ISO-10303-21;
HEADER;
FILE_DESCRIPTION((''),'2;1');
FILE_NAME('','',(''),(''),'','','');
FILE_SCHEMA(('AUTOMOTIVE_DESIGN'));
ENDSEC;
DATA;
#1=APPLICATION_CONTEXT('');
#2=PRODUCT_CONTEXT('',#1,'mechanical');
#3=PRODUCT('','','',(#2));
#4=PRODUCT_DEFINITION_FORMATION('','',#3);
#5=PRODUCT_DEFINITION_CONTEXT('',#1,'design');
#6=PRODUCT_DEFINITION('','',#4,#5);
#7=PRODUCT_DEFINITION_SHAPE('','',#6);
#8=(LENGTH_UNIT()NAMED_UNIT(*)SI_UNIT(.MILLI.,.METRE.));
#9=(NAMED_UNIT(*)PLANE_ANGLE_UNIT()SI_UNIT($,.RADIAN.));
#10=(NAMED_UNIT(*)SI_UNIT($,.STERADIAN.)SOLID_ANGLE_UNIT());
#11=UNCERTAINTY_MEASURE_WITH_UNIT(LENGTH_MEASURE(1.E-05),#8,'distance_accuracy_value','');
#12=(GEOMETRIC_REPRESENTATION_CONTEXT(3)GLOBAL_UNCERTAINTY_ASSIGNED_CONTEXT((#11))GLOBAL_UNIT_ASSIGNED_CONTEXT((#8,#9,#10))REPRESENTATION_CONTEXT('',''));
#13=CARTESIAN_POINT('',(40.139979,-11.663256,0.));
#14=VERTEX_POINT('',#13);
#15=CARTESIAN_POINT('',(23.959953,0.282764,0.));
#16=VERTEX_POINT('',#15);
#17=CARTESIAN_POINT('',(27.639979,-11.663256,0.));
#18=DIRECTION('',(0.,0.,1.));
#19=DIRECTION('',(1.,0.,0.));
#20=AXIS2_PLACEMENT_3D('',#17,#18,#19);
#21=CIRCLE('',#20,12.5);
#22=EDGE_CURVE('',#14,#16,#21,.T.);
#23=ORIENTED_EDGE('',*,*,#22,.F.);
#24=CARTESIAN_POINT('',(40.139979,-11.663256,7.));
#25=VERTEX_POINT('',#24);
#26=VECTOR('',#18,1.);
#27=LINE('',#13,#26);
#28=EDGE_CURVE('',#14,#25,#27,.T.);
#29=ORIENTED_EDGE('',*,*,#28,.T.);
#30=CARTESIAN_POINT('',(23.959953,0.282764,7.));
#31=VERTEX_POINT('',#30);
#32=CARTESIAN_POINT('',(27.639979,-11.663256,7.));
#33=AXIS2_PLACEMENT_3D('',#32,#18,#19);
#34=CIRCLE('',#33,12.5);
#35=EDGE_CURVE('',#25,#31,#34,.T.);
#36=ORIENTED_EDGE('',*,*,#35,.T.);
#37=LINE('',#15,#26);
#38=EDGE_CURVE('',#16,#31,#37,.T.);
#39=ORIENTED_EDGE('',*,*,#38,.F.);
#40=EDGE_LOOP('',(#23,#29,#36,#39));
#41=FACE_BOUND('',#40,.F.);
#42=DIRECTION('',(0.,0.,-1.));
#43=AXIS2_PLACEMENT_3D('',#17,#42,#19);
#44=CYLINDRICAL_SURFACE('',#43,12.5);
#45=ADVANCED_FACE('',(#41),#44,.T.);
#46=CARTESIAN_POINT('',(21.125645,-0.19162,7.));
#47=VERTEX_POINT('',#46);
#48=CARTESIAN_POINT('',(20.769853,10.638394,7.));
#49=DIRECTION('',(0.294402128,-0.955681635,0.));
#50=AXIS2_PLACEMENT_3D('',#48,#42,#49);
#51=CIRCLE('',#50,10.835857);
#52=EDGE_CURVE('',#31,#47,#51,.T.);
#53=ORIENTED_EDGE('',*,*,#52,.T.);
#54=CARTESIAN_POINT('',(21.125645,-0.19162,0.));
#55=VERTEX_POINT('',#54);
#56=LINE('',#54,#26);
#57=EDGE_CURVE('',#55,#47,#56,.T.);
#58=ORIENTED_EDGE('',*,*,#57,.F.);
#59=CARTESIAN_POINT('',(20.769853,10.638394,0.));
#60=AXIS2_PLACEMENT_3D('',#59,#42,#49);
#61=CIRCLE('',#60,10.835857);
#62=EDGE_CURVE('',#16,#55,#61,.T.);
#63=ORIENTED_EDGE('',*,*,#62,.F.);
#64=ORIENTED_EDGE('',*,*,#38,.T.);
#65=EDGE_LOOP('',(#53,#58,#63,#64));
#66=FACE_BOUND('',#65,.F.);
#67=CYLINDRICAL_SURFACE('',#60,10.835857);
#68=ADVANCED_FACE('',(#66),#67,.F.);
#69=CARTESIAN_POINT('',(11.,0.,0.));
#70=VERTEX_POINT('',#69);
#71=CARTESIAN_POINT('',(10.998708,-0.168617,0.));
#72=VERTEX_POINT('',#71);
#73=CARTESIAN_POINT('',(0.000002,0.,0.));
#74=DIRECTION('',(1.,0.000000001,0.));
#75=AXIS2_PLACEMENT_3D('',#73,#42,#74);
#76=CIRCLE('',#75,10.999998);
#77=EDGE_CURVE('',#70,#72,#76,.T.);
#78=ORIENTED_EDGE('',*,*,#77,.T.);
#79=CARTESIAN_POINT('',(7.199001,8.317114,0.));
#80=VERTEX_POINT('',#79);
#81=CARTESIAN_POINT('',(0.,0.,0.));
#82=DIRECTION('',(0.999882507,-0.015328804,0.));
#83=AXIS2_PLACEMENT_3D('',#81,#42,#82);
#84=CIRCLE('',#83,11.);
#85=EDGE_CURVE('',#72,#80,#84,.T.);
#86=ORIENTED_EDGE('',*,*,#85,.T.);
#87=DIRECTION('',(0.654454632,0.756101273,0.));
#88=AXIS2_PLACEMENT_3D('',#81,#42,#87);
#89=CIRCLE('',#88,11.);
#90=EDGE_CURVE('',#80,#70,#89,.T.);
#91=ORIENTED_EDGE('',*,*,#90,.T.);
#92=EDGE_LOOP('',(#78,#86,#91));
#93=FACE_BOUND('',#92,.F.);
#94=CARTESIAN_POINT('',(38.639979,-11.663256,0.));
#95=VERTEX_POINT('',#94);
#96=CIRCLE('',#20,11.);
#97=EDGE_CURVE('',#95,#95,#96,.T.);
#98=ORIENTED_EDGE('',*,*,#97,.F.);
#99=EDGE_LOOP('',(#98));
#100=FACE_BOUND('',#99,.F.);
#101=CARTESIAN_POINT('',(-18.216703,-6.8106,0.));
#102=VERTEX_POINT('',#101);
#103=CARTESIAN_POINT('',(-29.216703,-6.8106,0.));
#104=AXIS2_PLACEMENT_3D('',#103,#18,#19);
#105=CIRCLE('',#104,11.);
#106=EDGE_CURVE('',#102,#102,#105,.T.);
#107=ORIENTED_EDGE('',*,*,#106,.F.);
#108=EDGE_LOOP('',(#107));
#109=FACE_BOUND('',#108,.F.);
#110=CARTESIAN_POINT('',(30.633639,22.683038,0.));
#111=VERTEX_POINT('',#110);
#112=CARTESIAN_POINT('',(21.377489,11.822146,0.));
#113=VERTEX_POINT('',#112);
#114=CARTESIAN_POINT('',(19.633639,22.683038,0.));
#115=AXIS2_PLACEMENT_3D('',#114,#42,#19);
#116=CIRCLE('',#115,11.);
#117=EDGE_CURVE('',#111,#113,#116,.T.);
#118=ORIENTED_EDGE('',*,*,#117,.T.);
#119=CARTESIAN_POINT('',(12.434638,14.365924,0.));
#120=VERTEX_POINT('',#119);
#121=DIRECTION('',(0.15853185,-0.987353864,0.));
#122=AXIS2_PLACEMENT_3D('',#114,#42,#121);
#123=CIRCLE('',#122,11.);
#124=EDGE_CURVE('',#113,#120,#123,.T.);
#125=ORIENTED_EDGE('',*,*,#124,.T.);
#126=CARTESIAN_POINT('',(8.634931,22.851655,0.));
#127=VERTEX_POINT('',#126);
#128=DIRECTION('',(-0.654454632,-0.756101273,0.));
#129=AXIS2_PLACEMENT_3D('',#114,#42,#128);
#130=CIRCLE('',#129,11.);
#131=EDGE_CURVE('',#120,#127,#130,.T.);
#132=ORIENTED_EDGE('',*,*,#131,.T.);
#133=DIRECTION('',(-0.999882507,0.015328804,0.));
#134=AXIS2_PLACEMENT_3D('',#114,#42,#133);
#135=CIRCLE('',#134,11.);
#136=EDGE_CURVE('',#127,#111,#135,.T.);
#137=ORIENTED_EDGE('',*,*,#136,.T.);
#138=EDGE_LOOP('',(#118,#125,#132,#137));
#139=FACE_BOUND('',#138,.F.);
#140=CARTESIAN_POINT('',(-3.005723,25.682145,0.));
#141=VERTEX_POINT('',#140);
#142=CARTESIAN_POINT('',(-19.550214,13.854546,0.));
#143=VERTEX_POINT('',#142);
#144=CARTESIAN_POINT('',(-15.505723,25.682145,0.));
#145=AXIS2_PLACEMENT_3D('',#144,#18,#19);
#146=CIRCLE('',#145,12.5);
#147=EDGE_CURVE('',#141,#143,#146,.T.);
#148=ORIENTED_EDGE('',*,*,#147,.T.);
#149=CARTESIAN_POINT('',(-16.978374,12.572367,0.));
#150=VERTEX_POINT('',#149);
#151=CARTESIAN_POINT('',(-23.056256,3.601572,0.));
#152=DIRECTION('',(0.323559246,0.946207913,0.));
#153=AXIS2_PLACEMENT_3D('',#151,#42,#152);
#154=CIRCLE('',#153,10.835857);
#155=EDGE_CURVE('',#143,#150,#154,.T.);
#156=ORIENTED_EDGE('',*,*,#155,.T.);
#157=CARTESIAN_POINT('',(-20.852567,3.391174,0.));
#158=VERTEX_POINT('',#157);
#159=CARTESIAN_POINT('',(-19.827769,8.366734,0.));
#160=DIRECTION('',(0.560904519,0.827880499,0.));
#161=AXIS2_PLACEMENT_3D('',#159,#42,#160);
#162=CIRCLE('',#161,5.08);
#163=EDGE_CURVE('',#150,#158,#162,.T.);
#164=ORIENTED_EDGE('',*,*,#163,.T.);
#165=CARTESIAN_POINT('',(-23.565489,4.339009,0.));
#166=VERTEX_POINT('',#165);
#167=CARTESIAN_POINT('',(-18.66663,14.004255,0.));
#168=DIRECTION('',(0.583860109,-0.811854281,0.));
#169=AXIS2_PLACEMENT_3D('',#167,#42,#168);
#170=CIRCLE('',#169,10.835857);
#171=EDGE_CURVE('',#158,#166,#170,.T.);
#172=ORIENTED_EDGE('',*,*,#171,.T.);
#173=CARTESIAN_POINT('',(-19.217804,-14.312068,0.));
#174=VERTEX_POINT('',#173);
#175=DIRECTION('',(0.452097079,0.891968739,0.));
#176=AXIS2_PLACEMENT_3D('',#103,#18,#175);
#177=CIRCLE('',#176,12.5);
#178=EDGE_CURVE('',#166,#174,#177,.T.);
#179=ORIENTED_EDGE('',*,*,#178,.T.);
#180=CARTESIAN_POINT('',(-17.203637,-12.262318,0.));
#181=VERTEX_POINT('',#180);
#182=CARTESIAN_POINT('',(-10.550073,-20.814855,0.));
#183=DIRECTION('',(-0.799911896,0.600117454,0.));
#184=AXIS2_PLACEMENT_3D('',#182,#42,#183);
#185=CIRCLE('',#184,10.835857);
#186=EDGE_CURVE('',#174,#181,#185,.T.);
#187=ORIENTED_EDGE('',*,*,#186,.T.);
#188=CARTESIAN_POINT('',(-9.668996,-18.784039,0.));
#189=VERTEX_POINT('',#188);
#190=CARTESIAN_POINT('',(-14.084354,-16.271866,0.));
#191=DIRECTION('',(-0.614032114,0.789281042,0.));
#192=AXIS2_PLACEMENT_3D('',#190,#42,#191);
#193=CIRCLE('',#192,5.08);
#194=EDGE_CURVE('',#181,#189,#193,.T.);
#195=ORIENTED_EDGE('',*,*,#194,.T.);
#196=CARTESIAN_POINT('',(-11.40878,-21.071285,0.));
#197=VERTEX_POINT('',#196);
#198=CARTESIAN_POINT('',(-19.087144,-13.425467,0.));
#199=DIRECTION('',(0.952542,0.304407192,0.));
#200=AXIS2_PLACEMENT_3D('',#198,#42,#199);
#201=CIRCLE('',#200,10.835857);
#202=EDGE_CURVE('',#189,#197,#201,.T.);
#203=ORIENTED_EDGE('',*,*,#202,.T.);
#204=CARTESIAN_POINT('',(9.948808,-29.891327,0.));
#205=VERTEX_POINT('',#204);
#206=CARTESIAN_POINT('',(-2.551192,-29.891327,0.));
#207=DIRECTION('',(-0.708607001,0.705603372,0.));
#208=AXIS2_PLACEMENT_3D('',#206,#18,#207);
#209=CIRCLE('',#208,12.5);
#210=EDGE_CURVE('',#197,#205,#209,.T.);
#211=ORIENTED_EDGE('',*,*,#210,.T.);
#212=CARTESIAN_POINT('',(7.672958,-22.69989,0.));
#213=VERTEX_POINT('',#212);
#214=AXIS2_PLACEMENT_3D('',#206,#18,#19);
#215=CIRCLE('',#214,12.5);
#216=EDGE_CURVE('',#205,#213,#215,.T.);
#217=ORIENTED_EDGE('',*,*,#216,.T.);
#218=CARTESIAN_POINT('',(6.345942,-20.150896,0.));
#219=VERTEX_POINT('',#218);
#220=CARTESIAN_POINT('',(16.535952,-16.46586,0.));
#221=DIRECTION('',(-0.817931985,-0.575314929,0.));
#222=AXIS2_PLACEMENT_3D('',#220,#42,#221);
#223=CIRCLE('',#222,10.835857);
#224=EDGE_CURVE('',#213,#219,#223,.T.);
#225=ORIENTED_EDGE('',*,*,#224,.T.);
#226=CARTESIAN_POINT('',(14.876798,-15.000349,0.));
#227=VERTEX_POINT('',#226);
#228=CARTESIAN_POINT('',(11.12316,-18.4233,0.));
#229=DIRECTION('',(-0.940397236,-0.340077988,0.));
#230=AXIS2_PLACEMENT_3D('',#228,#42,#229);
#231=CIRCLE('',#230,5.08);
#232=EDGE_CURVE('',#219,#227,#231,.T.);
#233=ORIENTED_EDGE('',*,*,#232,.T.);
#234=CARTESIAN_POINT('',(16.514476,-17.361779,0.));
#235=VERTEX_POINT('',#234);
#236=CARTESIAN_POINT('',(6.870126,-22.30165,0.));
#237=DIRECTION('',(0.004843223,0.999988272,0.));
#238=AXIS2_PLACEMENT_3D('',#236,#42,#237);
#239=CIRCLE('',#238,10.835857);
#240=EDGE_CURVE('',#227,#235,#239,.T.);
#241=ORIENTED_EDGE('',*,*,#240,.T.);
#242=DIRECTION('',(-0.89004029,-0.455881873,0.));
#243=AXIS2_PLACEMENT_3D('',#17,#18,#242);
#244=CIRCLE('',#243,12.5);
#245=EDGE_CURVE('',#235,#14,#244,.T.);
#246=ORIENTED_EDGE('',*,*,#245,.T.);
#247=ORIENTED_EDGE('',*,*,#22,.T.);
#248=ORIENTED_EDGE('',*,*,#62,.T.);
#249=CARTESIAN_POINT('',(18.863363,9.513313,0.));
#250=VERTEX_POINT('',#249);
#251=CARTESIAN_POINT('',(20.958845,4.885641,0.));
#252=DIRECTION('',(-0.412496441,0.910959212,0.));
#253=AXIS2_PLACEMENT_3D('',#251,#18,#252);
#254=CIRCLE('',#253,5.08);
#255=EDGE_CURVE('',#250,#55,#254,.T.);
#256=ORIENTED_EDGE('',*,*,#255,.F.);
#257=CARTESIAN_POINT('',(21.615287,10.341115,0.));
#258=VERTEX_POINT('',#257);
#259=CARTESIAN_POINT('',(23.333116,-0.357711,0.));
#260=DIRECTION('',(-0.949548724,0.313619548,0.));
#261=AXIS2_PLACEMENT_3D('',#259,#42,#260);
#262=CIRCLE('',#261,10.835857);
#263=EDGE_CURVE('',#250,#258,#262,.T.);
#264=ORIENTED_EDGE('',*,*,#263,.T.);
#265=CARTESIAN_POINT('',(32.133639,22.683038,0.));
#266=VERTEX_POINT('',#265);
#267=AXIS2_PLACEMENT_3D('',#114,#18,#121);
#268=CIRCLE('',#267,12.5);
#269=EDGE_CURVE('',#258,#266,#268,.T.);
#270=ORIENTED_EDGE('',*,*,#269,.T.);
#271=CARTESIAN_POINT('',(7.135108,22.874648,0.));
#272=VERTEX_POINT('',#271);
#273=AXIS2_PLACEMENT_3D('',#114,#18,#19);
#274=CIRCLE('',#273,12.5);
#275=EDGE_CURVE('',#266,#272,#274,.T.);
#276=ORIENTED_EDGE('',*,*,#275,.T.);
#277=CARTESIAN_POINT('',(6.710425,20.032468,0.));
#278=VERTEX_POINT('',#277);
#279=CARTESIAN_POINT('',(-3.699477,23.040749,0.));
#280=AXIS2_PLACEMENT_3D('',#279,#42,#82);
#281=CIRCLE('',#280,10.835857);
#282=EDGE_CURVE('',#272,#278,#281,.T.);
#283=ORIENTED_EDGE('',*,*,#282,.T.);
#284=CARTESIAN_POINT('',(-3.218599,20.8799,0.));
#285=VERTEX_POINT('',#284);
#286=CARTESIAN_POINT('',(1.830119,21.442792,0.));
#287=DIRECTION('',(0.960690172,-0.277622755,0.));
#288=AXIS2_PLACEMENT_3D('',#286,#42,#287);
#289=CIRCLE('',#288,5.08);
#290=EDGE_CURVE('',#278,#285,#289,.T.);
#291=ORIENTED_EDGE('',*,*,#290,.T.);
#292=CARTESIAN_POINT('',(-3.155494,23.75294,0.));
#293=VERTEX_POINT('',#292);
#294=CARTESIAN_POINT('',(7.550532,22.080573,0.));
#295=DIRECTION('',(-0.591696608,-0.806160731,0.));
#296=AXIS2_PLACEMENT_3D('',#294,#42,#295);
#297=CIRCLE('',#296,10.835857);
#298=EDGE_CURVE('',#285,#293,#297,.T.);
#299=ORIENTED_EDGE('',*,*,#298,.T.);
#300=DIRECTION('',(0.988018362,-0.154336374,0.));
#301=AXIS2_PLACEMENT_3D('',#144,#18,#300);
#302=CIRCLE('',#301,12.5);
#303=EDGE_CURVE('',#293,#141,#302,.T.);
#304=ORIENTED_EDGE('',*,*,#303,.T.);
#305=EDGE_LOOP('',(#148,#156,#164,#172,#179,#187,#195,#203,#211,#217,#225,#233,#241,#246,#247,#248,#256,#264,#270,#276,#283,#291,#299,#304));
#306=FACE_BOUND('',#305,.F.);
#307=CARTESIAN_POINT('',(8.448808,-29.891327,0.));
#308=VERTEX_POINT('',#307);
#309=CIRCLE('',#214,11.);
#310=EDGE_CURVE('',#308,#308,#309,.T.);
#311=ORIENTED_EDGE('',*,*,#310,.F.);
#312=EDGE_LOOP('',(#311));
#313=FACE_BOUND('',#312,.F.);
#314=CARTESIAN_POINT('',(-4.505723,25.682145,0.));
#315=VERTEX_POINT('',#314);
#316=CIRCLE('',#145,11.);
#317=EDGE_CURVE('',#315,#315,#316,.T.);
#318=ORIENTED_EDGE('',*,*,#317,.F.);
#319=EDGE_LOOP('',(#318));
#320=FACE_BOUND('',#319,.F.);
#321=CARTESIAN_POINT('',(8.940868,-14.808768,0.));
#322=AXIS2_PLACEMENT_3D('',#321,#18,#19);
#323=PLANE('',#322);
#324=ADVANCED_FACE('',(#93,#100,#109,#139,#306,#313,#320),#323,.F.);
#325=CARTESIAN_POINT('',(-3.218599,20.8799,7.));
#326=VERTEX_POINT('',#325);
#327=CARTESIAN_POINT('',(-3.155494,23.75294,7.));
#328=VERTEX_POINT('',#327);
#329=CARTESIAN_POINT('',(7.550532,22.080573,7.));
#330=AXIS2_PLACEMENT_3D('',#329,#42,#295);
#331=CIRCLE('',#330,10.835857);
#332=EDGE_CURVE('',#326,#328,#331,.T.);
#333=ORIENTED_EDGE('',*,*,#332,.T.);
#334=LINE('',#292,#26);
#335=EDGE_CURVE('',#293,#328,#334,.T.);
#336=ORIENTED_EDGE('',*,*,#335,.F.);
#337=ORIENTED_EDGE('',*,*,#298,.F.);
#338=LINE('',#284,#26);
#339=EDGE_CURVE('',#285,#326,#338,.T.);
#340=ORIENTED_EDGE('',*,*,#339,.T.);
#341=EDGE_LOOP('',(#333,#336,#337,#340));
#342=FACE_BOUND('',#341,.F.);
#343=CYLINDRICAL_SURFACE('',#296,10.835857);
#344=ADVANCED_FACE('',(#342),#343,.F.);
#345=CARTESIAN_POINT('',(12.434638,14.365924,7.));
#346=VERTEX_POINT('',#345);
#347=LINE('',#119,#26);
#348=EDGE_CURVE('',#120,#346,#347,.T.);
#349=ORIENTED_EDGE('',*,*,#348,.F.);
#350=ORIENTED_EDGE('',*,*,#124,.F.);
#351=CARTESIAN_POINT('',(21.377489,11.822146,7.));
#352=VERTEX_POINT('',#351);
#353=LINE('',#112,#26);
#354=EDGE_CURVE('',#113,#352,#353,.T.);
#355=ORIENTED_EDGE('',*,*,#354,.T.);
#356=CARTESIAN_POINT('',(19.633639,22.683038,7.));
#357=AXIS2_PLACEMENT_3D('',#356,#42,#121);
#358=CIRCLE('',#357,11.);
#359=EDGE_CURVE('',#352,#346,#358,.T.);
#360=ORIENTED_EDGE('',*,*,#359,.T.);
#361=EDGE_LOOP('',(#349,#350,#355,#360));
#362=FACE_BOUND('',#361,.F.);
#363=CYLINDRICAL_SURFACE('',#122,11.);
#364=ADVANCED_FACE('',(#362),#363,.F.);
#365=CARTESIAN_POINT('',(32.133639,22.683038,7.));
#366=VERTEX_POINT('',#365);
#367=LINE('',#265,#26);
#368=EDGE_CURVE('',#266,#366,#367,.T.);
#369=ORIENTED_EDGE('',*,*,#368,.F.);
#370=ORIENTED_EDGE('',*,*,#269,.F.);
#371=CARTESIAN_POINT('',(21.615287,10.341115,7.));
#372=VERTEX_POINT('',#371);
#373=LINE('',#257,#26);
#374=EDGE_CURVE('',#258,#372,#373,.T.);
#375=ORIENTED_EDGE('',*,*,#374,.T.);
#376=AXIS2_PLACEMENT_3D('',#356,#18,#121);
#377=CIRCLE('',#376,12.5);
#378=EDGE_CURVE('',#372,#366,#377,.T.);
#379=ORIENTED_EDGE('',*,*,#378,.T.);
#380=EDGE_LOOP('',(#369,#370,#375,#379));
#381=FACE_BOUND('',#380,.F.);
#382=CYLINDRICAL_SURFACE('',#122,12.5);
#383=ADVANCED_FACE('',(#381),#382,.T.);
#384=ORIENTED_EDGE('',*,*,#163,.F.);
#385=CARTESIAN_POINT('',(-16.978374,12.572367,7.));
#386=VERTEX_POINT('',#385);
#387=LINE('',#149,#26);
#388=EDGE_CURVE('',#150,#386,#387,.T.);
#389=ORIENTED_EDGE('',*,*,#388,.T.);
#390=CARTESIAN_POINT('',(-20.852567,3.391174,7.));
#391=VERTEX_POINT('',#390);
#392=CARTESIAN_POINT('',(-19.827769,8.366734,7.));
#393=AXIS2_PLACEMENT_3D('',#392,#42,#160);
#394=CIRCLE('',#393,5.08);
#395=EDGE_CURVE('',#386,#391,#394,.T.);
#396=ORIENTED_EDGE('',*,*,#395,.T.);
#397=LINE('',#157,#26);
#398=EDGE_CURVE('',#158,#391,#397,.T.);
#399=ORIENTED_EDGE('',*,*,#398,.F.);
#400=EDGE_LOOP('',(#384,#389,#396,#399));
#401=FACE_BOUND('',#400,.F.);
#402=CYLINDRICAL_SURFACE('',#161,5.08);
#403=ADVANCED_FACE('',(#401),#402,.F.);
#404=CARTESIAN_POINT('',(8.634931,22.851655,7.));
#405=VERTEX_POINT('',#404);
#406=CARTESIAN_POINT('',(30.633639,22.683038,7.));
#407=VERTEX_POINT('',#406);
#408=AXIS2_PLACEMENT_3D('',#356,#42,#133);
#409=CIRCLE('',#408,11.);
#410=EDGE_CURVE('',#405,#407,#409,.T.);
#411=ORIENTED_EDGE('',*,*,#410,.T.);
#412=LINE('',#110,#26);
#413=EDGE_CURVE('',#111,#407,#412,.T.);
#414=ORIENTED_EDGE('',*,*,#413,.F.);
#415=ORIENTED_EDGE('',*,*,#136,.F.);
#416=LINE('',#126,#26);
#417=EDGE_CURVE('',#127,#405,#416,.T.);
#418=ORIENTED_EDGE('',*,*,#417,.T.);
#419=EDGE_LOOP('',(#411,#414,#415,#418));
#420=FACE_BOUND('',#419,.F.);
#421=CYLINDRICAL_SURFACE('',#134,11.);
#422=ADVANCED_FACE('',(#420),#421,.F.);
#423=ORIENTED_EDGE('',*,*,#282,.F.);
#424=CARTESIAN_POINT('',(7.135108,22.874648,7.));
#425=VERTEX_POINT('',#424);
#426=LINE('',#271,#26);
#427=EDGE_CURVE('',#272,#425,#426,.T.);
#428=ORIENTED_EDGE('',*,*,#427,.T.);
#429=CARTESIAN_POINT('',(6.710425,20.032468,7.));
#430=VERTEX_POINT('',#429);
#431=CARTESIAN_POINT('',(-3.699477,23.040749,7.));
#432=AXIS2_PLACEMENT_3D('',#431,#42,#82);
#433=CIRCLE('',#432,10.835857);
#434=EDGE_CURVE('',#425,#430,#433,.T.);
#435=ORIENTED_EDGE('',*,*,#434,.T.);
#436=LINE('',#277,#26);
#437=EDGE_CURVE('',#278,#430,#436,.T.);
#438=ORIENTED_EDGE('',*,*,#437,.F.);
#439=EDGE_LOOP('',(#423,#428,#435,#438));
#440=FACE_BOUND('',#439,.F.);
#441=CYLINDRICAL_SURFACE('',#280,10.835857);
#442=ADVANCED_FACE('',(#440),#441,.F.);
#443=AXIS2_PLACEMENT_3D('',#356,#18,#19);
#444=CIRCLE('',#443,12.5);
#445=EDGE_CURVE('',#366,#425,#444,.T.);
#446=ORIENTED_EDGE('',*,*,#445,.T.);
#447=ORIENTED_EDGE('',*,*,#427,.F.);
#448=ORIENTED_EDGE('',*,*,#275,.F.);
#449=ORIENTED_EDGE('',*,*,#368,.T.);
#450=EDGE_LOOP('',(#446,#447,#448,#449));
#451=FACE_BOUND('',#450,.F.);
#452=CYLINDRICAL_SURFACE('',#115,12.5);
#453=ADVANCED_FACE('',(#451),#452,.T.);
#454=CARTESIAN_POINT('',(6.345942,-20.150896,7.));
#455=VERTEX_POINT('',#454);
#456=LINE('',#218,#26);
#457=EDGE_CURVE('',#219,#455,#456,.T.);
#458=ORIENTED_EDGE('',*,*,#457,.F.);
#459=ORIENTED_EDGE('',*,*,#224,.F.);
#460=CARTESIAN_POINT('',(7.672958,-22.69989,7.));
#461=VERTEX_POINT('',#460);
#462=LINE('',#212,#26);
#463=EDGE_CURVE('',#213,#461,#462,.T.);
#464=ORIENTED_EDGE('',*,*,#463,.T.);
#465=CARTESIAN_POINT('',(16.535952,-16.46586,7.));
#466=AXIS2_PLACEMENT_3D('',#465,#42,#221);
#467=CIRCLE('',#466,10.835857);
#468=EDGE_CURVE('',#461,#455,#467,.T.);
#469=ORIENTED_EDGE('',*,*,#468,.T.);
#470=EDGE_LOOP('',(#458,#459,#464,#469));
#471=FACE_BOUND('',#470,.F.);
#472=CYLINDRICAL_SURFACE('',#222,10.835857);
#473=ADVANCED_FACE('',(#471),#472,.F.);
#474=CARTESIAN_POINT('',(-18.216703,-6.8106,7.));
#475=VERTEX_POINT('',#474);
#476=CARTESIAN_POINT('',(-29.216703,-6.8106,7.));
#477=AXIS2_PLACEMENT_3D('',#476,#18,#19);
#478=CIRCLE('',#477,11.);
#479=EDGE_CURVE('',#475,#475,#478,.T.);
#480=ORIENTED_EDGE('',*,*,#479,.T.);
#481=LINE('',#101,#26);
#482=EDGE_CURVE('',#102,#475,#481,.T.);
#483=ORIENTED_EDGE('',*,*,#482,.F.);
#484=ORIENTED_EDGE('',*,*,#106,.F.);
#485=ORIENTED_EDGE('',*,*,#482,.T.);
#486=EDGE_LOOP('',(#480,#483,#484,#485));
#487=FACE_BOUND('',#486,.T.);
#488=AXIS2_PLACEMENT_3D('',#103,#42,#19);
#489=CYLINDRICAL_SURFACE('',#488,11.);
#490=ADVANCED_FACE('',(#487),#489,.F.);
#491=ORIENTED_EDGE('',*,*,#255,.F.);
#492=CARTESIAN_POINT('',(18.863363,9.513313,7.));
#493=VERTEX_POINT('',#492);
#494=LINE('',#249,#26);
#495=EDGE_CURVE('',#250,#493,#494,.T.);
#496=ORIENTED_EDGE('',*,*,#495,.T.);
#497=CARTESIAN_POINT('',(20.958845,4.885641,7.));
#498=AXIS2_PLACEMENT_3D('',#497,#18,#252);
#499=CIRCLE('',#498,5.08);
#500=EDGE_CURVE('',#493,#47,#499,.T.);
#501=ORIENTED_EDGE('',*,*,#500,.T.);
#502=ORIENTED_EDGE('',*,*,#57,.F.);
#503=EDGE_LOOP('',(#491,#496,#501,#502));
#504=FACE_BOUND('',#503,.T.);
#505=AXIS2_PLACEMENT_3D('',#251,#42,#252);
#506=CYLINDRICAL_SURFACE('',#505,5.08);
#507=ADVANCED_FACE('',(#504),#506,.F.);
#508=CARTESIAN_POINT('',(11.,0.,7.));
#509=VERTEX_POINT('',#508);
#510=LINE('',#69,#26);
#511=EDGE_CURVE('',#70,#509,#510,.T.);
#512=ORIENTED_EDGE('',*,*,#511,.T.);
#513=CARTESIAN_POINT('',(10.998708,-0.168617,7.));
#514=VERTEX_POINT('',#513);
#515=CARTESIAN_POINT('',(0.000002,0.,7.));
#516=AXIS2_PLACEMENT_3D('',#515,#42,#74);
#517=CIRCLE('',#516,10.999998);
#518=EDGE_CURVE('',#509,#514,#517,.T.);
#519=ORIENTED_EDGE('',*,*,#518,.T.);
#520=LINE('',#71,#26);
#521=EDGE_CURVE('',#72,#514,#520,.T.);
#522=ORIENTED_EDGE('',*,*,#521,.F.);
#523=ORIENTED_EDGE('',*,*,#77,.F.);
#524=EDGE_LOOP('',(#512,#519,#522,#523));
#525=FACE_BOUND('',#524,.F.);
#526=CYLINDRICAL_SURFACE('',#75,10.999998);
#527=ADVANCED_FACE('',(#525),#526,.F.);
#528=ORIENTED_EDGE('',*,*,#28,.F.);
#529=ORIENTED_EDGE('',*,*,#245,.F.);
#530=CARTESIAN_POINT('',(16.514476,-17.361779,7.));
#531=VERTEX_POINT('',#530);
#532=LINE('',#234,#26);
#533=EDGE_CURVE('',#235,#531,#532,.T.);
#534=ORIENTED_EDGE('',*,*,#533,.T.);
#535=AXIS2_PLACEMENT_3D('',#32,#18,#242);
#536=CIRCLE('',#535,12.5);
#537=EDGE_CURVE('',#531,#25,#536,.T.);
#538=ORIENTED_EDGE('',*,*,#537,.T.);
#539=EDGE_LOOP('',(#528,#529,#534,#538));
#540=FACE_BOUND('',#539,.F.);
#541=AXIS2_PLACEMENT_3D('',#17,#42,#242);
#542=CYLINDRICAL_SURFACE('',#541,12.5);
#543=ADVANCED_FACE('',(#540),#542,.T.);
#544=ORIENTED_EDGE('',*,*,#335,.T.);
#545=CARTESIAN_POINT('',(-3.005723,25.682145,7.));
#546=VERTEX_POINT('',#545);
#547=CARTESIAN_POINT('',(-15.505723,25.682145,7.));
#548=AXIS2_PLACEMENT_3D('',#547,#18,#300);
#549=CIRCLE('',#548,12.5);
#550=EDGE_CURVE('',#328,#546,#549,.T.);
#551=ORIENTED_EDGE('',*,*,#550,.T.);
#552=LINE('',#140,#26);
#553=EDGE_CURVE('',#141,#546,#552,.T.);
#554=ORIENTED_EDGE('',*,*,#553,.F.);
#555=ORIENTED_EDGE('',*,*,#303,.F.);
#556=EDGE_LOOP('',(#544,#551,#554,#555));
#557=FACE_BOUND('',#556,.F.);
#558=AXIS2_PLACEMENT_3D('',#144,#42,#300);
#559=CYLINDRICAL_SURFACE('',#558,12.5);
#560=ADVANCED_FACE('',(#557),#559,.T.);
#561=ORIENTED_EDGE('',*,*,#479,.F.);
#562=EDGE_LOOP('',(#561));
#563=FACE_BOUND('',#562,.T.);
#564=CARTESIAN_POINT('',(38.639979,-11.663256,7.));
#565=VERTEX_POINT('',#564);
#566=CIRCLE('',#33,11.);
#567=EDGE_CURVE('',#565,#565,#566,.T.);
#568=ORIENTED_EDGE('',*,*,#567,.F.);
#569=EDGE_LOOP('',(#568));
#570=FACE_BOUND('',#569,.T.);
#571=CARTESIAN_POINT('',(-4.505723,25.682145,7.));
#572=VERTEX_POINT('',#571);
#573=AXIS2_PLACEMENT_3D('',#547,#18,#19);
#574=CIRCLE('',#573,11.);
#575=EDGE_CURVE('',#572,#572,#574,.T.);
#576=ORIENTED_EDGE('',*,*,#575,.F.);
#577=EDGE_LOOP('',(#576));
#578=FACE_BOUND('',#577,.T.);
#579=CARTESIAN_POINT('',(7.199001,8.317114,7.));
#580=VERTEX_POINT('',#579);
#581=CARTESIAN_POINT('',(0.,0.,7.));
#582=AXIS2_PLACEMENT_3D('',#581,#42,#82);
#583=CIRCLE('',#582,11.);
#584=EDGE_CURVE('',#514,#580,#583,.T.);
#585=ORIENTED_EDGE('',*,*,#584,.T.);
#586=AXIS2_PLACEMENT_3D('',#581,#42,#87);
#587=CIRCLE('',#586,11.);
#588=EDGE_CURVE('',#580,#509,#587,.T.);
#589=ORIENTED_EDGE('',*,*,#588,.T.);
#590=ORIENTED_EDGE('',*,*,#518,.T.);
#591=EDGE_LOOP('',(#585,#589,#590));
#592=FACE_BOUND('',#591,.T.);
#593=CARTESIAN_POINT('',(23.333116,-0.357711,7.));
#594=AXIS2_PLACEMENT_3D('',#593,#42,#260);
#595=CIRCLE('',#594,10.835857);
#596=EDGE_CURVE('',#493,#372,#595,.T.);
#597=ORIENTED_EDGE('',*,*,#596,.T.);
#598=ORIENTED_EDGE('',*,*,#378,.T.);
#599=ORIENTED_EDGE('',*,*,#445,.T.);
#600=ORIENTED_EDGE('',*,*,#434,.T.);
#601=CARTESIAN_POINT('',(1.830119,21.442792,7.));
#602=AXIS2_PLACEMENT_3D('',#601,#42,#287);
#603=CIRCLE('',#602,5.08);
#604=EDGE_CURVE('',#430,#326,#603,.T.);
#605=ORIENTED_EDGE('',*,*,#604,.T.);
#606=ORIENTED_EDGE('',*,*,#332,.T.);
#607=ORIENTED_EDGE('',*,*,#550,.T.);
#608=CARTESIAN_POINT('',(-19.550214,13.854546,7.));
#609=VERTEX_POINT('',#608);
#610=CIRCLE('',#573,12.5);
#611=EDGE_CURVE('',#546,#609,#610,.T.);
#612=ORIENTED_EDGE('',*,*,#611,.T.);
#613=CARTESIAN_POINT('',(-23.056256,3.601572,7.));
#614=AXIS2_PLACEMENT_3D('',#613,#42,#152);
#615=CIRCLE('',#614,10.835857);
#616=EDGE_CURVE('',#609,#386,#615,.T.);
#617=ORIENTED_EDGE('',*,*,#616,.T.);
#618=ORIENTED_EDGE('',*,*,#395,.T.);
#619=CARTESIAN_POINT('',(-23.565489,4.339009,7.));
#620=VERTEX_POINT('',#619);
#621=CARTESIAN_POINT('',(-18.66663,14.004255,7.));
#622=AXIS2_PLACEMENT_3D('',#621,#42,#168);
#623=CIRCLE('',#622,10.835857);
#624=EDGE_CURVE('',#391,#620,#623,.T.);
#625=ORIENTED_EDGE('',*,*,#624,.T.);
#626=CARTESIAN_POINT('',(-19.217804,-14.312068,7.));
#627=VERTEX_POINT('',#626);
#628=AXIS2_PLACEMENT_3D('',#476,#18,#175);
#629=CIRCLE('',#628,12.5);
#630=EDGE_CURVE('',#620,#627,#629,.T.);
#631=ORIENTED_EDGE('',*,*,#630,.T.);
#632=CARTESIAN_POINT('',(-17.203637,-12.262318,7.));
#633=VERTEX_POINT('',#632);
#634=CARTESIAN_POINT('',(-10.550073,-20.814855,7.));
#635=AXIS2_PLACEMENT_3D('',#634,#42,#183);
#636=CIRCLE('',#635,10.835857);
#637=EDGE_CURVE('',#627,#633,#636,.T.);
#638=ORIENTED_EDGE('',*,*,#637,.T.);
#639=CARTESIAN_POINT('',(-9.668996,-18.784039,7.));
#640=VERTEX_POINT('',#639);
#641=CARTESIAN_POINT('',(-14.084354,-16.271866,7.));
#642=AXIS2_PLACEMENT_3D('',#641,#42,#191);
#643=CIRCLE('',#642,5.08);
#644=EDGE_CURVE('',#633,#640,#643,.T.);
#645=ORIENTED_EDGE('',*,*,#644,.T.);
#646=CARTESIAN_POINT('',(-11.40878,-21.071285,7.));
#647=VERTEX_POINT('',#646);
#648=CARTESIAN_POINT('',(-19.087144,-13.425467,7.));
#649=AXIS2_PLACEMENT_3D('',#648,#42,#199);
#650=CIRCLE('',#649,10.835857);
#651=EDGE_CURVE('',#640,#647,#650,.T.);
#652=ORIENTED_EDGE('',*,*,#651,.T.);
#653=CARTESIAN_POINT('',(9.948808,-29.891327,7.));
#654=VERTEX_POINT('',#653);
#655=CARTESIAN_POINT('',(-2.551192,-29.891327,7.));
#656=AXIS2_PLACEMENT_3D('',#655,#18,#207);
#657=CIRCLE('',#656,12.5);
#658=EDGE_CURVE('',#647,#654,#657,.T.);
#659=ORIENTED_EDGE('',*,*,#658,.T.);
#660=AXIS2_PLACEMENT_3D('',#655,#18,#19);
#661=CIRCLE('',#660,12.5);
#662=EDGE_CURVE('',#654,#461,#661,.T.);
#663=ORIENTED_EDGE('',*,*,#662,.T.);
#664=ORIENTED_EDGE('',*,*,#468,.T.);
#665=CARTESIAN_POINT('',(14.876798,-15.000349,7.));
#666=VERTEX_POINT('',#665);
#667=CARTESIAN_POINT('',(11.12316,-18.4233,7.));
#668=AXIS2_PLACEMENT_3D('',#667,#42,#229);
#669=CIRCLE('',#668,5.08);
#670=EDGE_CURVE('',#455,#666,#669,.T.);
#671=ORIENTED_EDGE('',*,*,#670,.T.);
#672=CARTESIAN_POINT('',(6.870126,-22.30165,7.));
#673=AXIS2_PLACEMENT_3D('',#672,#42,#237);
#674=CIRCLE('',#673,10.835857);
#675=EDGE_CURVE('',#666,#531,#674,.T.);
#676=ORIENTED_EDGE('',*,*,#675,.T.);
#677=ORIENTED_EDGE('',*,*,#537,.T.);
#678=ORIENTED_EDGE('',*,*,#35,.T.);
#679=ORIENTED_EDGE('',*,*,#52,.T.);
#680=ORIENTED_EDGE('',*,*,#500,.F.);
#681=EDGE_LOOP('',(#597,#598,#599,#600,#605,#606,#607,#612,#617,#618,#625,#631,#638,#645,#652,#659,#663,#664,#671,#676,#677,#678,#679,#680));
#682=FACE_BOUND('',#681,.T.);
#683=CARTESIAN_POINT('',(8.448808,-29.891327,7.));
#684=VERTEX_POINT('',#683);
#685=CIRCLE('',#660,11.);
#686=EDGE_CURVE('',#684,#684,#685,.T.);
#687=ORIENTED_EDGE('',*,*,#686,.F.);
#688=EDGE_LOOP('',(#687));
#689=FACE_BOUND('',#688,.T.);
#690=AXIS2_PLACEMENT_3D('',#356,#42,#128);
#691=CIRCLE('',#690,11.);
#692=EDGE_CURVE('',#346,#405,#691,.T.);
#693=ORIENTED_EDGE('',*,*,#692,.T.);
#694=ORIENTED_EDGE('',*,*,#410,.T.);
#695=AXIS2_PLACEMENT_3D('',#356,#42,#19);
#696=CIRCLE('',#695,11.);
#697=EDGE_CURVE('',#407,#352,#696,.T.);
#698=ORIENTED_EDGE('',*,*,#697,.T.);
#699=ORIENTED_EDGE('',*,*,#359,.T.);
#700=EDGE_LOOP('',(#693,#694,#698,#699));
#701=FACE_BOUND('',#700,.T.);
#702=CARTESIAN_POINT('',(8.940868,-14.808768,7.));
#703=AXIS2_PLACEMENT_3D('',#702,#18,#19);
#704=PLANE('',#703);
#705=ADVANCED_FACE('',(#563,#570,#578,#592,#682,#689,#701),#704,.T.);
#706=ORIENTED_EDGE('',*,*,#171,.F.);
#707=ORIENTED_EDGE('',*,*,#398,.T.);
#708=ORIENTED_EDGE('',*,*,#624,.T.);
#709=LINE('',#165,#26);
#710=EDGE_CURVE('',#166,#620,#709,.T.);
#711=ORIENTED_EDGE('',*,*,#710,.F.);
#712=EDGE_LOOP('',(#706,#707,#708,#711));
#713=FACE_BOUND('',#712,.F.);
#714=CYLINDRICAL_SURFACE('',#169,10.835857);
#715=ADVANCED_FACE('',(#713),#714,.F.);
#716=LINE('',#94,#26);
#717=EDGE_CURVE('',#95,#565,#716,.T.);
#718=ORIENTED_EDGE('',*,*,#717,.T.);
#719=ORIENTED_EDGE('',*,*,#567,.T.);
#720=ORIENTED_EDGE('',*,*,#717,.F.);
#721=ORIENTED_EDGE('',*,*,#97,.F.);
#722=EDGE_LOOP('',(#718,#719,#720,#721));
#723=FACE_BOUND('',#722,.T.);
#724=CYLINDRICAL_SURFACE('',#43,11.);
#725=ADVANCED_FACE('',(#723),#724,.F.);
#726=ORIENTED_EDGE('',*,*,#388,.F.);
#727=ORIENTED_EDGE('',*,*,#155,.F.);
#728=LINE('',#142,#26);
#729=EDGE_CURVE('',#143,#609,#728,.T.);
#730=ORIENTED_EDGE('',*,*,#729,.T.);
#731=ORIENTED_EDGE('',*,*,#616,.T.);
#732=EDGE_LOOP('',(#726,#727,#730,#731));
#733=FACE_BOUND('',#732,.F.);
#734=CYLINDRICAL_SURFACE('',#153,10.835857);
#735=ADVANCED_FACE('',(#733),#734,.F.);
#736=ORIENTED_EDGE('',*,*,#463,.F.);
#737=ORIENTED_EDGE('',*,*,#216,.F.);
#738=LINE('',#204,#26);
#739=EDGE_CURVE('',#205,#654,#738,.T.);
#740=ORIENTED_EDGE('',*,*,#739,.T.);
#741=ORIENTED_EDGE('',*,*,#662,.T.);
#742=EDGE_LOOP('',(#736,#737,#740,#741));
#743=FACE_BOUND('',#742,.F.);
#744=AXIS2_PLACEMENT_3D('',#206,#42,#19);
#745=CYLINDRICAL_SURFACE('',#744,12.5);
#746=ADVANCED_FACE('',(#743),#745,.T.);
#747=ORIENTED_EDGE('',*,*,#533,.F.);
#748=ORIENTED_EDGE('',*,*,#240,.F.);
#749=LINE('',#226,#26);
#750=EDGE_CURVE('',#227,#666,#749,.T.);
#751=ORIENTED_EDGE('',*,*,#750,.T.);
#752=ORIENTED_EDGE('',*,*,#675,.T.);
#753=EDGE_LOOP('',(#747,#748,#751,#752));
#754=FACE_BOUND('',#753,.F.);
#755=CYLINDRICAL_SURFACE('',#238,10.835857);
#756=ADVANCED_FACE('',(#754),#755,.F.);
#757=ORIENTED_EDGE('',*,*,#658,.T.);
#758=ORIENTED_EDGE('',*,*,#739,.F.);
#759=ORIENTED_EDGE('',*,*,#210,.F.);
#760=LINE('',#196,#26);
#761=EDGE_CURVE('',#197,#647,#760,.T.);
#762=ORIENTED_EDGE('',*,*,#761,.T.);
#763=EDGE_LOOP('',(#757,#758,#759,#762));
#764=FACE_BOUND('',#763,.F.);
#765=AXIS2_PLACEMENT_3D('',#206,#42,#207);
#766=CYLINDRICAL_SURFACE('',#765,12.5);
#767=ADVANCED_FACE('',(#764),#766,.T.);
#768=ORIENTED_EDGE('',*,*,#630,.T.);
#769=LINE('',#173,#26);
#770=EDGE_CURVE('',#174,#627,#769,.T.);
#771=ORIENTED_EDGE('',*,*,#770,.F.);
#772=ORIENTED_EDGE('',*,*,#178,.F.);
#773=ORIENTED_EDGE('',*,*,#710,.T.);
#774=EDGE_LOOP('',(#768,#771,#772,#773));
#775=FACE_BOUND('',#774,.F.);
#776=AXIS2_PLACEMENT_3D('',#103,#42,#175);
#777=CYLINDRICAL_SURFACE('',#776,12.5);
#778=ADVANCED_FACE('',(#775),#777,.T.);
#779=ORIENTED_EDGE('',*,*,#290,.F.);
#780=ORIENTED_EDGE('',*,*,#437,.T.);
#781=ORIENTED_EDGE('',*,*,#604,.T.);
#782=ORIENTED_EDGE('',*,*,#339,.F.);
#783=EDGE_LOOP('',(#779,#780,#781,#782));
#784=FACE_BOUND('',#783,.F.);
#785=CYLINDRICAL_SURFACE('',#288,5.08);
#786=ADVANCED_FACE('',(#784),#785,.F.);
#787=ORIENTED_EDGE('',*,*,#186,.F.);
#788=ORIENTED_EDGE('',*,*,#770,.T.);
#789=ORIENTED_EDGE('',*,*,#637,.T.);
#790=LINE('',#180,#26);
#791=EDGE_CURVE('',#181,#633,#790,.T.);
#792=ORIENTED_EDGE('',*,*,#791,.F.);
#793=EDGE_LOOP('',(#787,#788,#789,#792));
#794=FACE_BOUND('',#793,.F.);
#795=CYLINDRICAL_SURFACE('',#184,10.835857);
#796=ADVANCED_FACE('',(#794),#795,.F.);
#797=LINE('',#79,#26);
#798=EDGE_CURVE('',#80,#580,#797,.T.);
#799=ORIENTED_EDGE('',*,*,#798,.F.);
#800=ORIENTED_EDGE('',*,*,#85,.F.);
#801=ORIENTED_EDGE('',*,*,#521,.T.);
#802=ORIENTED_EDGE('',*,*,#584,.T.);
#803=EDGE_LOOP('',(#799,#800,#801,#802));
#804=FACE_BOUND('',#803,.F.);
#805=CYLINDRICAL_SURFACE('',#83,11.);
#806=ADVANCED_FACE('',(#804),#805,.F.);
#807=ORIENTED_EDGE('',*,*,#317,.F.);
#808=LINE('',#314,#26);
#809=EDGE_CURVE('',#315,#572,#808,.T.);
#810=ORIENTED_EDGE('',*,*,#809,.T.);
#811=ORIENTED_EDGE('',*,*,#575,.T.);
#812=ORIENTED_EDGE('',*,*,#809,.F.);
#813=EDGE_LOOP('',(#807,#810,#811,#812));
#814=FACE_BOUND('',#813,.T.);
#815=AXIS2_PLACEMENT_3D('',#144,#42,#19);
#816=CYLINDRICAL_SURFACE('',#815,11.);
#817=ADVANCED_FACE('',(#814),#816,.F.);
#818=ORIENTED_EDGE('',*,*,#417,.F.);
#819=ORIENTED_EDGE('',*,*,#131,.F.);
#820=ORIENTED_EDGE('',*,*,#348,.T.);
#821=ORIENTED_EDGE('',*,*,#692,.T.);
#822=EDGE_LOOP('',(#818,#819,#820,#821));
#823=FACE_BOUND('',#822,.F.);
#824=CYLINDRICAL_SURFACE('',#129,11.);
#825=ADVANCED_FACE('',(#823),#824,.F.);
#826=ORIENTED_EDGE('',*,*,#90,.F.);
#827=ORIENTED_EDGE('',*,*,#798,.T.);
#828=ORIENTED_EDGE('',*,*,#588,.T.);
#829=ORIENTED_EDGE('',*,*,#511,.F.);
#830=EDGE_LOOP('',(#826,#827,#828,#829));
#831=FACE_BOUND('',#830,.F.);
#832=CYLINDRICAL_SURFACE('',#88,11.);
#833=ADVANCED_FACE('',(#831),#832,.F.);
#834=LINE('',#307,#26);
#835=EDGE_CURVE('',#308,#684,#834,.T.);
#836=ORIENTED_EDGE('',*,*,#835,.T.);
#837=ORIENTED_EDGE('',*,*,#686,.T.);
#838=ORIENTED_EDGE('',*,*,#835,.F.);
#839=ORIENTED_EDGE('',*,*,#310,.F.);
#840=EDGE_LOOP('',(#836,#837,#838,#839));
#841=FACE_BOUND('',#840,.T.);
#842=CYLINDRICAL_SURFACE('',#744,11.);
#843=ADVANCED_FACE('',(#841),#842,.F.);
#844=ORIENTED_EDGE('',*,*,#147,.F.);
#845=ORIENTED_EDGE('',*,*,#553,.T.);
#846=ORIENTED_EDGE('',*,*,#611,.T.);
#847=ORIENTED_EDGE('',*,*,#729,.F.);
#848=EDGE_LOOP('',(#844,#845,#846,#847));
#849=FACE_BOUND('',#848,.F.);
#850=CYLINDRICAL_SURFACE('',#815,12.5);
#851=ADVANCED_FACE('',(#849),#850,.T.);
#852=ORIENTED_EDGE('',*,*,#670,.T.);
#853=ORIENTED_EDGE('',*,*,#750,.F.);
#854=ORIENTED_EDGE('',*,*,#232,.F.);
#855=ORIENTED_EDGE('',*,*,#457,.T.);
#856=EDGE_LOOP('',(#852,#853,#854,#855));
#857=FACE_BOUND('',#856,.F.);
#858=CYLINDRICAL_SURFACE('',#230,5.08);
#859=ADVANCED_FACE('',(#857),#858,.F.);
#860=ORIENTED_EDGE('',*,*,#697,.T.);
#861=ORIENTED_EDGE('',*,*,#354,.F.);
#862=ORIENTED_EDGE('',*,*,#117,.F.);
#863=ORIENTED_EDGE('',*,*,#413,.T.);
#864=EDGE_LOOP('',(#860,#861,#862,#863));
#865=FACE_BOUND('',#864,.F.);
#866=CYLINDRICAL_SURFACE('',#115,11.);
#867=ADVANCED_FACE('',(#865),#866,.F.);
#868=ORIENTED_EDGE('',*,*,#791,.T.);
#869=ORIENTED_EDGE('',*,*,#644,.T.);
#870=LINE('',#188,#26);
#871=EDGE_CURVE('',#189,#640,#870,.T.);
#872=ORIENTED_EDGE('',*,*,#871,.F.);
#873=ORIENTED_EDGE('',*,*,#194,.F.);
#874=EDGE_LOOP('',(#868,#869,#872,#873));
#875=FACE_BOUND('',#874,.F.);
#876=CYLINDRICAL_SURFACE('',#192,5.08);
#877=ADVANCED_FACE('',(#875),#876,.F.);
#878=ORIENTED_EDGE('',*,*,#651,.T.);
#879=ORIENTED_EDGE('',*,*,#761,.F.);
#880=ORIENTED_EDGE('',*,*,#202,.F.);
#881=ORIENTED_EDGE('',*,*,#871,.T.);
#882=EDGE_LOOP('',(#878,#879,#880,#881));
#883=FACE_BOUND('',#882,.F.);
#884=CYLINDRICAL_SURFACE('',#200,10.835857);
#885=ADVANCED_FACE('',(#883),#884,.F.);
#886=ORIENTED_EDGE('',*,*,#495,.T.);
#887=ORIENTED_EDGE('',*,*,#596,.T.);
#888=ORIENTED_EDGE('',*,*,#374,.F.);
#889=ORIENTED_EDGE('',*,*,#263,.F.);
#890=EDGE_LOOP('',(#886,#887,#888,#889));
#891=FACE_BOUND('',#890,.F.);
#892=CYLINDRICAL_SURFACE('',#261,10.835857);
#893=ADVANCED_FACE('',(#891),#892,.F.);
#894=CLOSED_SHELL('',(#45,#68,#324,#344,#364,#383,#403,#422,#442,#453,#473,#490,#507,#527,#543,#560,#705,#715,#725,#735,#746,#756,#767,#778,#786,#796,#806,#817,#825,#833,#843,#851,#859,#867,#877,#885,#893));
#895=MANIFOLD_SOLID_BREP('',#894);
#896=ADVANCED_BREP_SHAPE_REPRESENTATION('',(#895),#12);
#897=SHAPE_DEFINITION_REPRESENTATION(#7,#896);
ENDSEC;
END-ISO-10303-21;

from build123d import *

# Parameters (mm, degrees)
F0_R        = 11
F1_DEPTH    = 7
F2_T1_DEPTH = 7


# Not quite as in the source:
# - a fillet or chamfer that OpenCascade refuses, or shapes differently, is made with other operations: its cross-section is extruded or revolved along the edge and cut away or added


with BuildPart() as f1:
    # F0 (on Top) → F1 (new body)
    with BuildSketch(Plane.XY):
        with BuildLine():
            ThreePointArc((-9.9988986959, 7.5014681809), (-6.4607179934, 10.7008935613), (-1.9816481289, 12.341923298))
            ThreePointArc((-1.9816481289, 12.341923298), (-0.3831736882, 12.7248418239), (1.1389923545, 13.3451302033))
            ThreePointArc((1.1389923545, 13.3451302033), (-2.4661233688, 17.9474854132), (-3.1554936593, 23.7529398707))
            ThreePointArc((-3.1554936593, 23.7529398707), (-9.0450051907, 14.9812509858), (-19.5502137573, 13.8545456359))
            ThreePointArc((-19.5502137573, 13.8545456359), (-14.7338220094, 10.5408010189), (-12.3400050466, 5.2071181257))
            ThreePointArc((-12.3400050466, 5.2071181257), (-11.0821926148, 6.2652556505), (-9.9988986959, 7.5014681809))
        make_face()
        with BuildLine():
            ThreePointArc((8.8575875126, -8.820042146), (11.5166580742, -4.8596899903), (12.4985313373, -0.1916100485))
            Line((12.4985313373, -0.1916100485), (10.9987075768, -0.1686168427))
            ThreePointArc((10.9987075768, -0.1686168427), (-10.0394748812, -4.4954359199), (7.1990009483, 8.3171140034))
            Line((7.1990009483, 8.3171140034), (8.1806828958, 9.451265913))
            ThreePointArc((8.1806828958, 9.451265913), (6.2269941558, 10.838567423), (4.0444905732, 11.8275989112))
            ThreePointArc((4.0444905732, 11.8275989112), (1.0629967692, 12.4547195018), (-1.9816481289, 12.341923298))
            ThreePointArc((-1.9816481289, 12.341923298), (-6.4607179934, 10.7008935613), (-9.9988986959, 7.5014681809))
            ThreePointArc((-9.9988986959, 7.5014681809), (-11.5166580742, 4.8596899903), (-12.3502295249, 1.9292046764))
            ThreePointArc((-12.3502295249, 1.9292046764), (-12.1736262075, -2.8377499821), (-10.2241498173, -7.1914366098))
            ThreePointArc((-10.2241498173, -7.1914366098), (-8.1806828958, -9.451265913), (-5.6512134863, -11.1496092367))
            ThreePointArc((-5.6512134863, -11.1496092367), (-1.0629967692, -12.4547195018), (3.6800266027, -11.9460204337))
            ThreePointArc((3.6800266027, -11.9460204337), (6.4607179934, -10.7008935613), (8.8575875126, -8.820042146))
        make_face()
        with BuildLine():
            ThreePointArc((-1.9816481289, 12.341923298), (1.0629967692, 12.4547195018), (4.0444905732, 11.8275989112))
            ThreePointArc((4.0444905732, 11.8275989112), (2.5340263598, 12.4758619713), (1.1389923545, 13.3451302033))
            ThreePointArc((1.1389923545, 13.3451302033), (-0.3831736882, 12.7248418239), (-1.9816481289, 12.341923298))
        make_face()
        with BuildLine():
            ThreePointArc((11.1255036275, 5.6985234083), (12.1515183278, 2.930972932), (12.5, 0))
            ThreePointArc((12.5, 0), (12.4996328289, -0.0958078385), (12.4985313373, -0.1916100485))
            ThreePointArc((12.4985313373, -0.1916100485), (12.6483070335, 1.4452510866), (13.0439410346, 3.0406259242))
            ThreePointArc((13.0439410346, 3.0406259242), (11.983636554, 4.2966122073), (11.1255036275, 5.6985234083))
        make_face()
        with BuildLine():
            ThreePointArc((12.4985313373, -0.1916100485), (12.4996328289, -0.0958078385), (12.5, 0))
            ThreePointArc((12.5, 0), (12.1515183278, 2.930972932), (11.1255036275, 5.6985234083))
            ThreePointArc((11.1255036275, 5.6985234083), (9.8337672636, 7.7166716533), (8.1806828958, 9.451265913))
            Line((8.1806828958, 9.451265913), (7.1990009483, 8.3171140034))
            ThreePointArc((7.1990009483, 8.3171140034), (10.0047241449, 4.5722527035), (11, 0))
            ThreePointArc((11, 0), (10.9996768895, -0.0843108979), (10.9987075768, -0.1686168427))
            Line((10.9987075768, -0.1686168427), (12.4985313373, -0.1916100485))
        make_face()
        with BuildLine():
            ThreePointArc((-12.3502295249, 1.9292046764), (-11.5166580742, 4.8596899903), (-9.9988986959, 7.5014681809))
            ThreePointArc((-9.9988986959, 7.5014681809), (-11.0821926148, 6.2652556505), (-12.3400050466, 5.2071181257))
            ThreePointArc((-12.3400050466, 5.2071181257), (-12.2204509169, 3.5677725413), (-12.3502295249, 1.9292046764))
        make_face()
        with BuildLine():
            ThreePointArc((-8.7655348947, -10.1269542181), (-9.3831980656, -8.603721031), (-10.2241498173, -7.1914366098))
            ThreePointArc((-10.2241498173, -7.1914366098), (-12.1736262075, -2.8377499821), (-12.3502295249, 1.9292046764))
            ThreePointArc((-12.3502295249, 1.9292046764), (-12.2204509169, 3.5677725413), (-12.3400050466, 5.2071181257))
            ThreePointArc((-12.3400050466, 5.2071181257), (-17.8311469845, 3.2006552991), (-23.5654894116, 4.3390092796))
            ThreePointArc((-23.5654894116, 4.3390092796), (-18.5656426554, -0.2680533802), (-16.7167028979, -6.8105999571))
            ThreePointArc((-16.7167028979, -6.8105999571), (-17.3584518949, -10.7643175938), (-19.217804202, -14.312068138))
            ThreePointArc((-19.217804202, -14.312068138), (-14.577898889, -10.7554107829), (-8.7655348947, -10.1269542181))
        make_face()
        with BuildLine():
            ThreePointArc((8.1806828958, 9.451265913), (9.8337672636, 7.7166716533), (11.1255036275, 5.6985234083))
            ThreePointArc((11.1255036275, 5.6985234083), (11.983636554, 4.2966122073), (13.0439410346, 3.0406259242))
            ThreePointArc((13.0439410346, 3.0406259242), (16.3069989221, 7.8915006988), (21.6152870788, 10.3411148932))
            ThreePointArc((21.6152870788, 10.3411148932), (16.2136999096, 10.6599763116), (11.4529560542, 13.2317722782))
            Line((11.4529560542, 13.2317722782), (8.1806828958, 9.451265913))
        make_face()
        with BuildLine():
            ThreePointArc((13.0439410346, 3.0406259242), (12.6483070335, 1.4452510866), (12.4985313373, -0.1916100485))
            ThreePointArc((12.4985313373, -0.1916100485), (11.5166580742, -4.8596899903), (8.8575875126, -8.820042146))
            ThreePointArc((8.8575875126, -8.820042146), (7.7894683874, -10.0693894433), (6.9226065521, -11.4659200351))
            ThreePointArc((6.9226065521, -11.4659200351), (12.5444029571, -13.0702697591), (16.5144757506, -17.3617793852))
            ThreePointArc((16.5144757506, -17.3617793852), (16.1233213039, -6.8035659865), (23.9599527753, 0.2827644569))
            ThreePointArc((23.9599527754, 0.2827644569), (18.115639784, 0.1326361285), (13.0439410346, 3.0406259242))
        make_face()
        with BuildLine():
            ThreePointArc((4.0444905732, 11.8275989112), (6.2269941558, 10.838567423), (8.1806828958, 9.451265913))
            Line((8.1806828958, 9.451265913), (11.4529560542, 13.2317722782))
            ThreePointArc((11.4529560542, 13.2317722782), (8.2251447668, 17.5745882822), (7.1351076127, 22.8746482397))
            ThreePointArc((7.1351076127, 22.8746482397), (5.471896103, 17.2699840812), (1.1389923545, 13.3451302033))
            ThreePointArc((1.1389923545, 13.3451302033), (2.5340263598, 12.4758619713), (4.0444905732, 11.8275989112))
        make_face()
        with BuildLine():
            ThreePointArc((6.9226065521, -11.4659200351), (7.7894683874, -10.0693894433), (8.8575875126, -8.820042146))
            ThreePointArc((8.8575875126, -8.820042146), (6.4607179934, -10.7008935613), (3.6800266027, -11.9460204337))
            ThreePointArc((3.6800266027, -11.9460204337), (5.2830572871, -11.5826476774), (6.9226065521, -11.4659200351))
        make_face()
        with BuildLine():
            ThreePointArc((-8.7655348947, -10.1269542181), (-7.1694803363, -10.5198371292), (-5.6512134863, -11.1496092367))
            ThreePointArc((-5.6512134863, -11.1496092367), (-8.1806828958, -9.451265913), (-10.2241498173, -7.1914366098))
            ThreePointArc((-10.2241498173, -7.1914366098), (-9.3831980656, -8.603721031), (-8.7655348947, -10.1269542181))
        make_face()
        with BuildLine():
            ThreePointArc((6.9226065521, -11.4659200351), (5.2830572871, -11.5826476774), (3.6800266027, -11.9460204337))
            ThreePointArc((3.6800266027, -11.9460204337), (-1.0629967692, -12.4547195018), (-5.6512134863, -11.1496092367))
            ThreePointArc((-5.6512134863, -11.1496092367), (-7.1694803363, -10.5198371292), (-8.7655348947, -10.1269542181))
            ThreePointArc((-8.7655348947, -10.1269542181), (-8.554131526, -15.969371652), (-11.4087797586, -21.0712846584))
            ThreePointArc((-11.4087797586, -21.0712846584), (-1.4881954768, -17.4366073025), (7.6729575713, -22.6998901945))
            ThreePointArc((7.6729575713, -22.6998901945), (5.7241850115, -17.1880104456), (6.9226065521, -11.4659200351))
        make_face()
        with BuildLine():
            ThreePointArc((40.139979378, -11.6632559768), (35.0645893835, -1.6071550293), (23.9599527753, 0.2827644569))
            ThreePointArc((23.9599527753, 0.2827644569), (16.1233213039, -6.8035659865), (16.5144757506, -17.3617793852))
            ThreePointArc((16.5144757506, -17.3617793852), (30.5709523101, -23.8147743047), (40.139979378, -11.6632559768))
        make_face()
        with Locations((27.639979378, -11.6632559768)):
            Circle(F0_R, mode=Mode.SUBTRACT)
        with BuildLine():
            ThreePointArc((9.948807754, -29.8913268043), (9.3662712575, -26.1198465059), (7.6729575713, -22.6998901945))
            ThreePointArc((7.6729575713, -22.6998901945), (-1.4881954768, -17.4366073025), (-11.4087797586, -21.0712846584))
            ThreePointArc((-11.4087797586, -21.0712846584), (-7.3224686, -41.4448943033), (9.948807754, -29.8913268043))
        make_face()
        with Locations((-2.551192246, -29.8913268043)):
            Circle(F0_R, mode=Mode.SUBTRACT)
        with BuildLine():
            ThreePointArc((-23.5654894116, 4.3390092796), (-41.3903291054, -9.6483499392), (-19.217804202, -14.312068138))
            ThreePointArc((-19.217804202, -14.312068138), (-17.3584518949, -10.7643175938), (-16.7167028979, -6.8105999571))
            ThreePointArc((-16.7167028979, -6.8105999571), (-18.5656426554, -0.2680533802), (-23.5654894116, 4.3390092796))
        make_face()
        with Locations((-29.2167028979, -6.8105999571)):
            Circle(F0_R, mode=Mode.SUBTRACT)
        with BuildLine():
            ThreePointArc((-19.5502137573, 13.8545456359), (-9.0450051907, 14.9812509858), (-3.1554936593, 23.7529398707))
            ThreePointArc((-3.1554936593, 23.7529398707), (-3.0432220495, 24.7146397824), (-3.0057231841, 25.6821445471))
            ThreePointArc((-3.0057231841, 25.6821445471), (-22.7753128505, 35.8508743637), (-19.5502137573, 13.8545456359))
        make_face()
        with Locations((-15.5057231841, 25.6821445471)):
            Circle(F0_R, mode=Mode.SUBTRACT)
        with BuildLine():
            Line((21.3774893034, 11.8221456889), (21.6152870788, 10.3411148932))
            ThreePointArc((21.6152870788, 10.3411148932), (29.1473291281, 14.5750360208), (32.13363895, 22.6830381912))
            ThreePointArc((32.13363895, 22.6830381912), (19.7294467885, 35.1826710201), (7.1351076127, 22.8746482397))
            Line((7.1351076127, 22.8746482397), (8.6349313732, 22.8516550339))
            ThreePointArc((8.6349313732, 22.8516550339), (19.7179498479, 33.6827150806), (30.63363895, 22.6830381912))
            ThreePointArc((30.63363895, 22.6830381912), (28.0056863067, 15.5479962813), (21.3774893034, 11.8221456889))
        make_face()
        with BuildLine():
            ThreePointArc((7.1351076127, 22.8746482397), (8.2251447668, 17.5745882822), (11.4529560542, 13.2317722782))
            Line((11.4529560542, 13.2317722782), (12.4346380016, 14.3659241877))
            ThreePointArc((12.4346380016, 14.3659241877), (9.5941640688, 18.1876022712), (8.6349313732, 22.8516550339))
            Line((8.6349313732, 22.8516550339), (7.1351076127, 22.8746482397))
        make_face()
        with BuildLine():
            Line((12.4346380016, 14.3659241877), (11.4529560542, 13.2317722782))
            ThreePointArc((11.4529560542, 13.2317722782), (16.2136999096, 10.6599763116), (21.6152870788, 10.3411148932))
            Line((21.6152870788, 10.3411148932), (21.3774893034, 11.8221456889))
            ThreePointArc((21.3774893034, 11.8221456889), (16.6240925945, 12.1027437371), (12.4346380016, 14.3659241877))
        make_face()
    extrude(amount=F1_DEPTH)

    # F2: fillet of radius 5.08 on 5 edges, made by hand

    # F2_s2 → F2_t1 (join)
    with BuildSketch(Plane.XY):
        with BuildLine():
            ThreePointArc((6.3459415764, -20.1508962512), (8.4975237439, -14.0744569275), (14.876798383, -15.0003487989))
            ThreePointArc((14.876798383, -15.0003487989), (11.2701865952, -12.3993640914), (6.9226065521, -11.4659200351))
            ThreePointArc((6.9226065521, -11.4659200351), (5.7239018226, -15.7479612549), (6.3459415764, -20.1508962512))
        make_face()
        with BuildLine():
            ThreePointArc((-17.2036373964, -12.2623184818), (-10.7597247272, -12.4308717062), (-9.6689959497, -18.7840387442))
            ThreePointArc((-9.6689959497, -18.7840387442), (-8.3098168293, -14.5501986249), (-8.7655348947, -10.1269542181))
            ThreePointArc((-8.7655348947, -10.1269542181), (-13.2084182325, -10.3101417816), (-17.2036373964, -12.2623184818))
        make_face()
        with BuildLine():
            ThreePointArc((-16.9783742176, 12.5723666486), (-15.147399335, 6.3917557032), (-20.852566517, 3.391174409))
            ThreePointArc((-20.852566517, 3.391174409), (-16.405935836, 3.4068467981), (-12.3400050466, 5.2071181257))
            ThreePointArc((-12.3400050466, 5.2071181257), (-13.8871532279, 9.3759432051), (-16.9783742176, 12.5723666486))
        make_face()
        with BuildLine():
            ThreePointArc((6.7104250563, 20.0324683896), (1.398117097, 16.3811939786), (-3.2185989105, 20.8798997907))
            ThreePointArc((-3.2185989105, 20.8798997907), (-1.8296091346, 16.6557457406), (1.1389923545, 13.3451302033))
            ThreePointArc((1.1389923545, 13.3451302033), (4.6256855307, 16.1047933589), (6.7104250563, 20.0324683896))
        make_face()
        with BuildLine():
            ThreePointArc((18.8633629941, 9.5133133434), (16.0114832212, 3.7323789519), (21.1256449813, -0.1916203052))
            ThreePointArc((21.1256449813, -0.1916203052), (16.7459841072, 0.5773664725), (13.0439410346, 3.0406259242))
            ThreePointArc((13.0439410346, 3.0406259242), (15.2751752047, 6.8869701775), (18.8633629941, 9.5133133434))
        make_face()
    extrude(amount=F2_T1_DEPTH)


solid = f1.part
